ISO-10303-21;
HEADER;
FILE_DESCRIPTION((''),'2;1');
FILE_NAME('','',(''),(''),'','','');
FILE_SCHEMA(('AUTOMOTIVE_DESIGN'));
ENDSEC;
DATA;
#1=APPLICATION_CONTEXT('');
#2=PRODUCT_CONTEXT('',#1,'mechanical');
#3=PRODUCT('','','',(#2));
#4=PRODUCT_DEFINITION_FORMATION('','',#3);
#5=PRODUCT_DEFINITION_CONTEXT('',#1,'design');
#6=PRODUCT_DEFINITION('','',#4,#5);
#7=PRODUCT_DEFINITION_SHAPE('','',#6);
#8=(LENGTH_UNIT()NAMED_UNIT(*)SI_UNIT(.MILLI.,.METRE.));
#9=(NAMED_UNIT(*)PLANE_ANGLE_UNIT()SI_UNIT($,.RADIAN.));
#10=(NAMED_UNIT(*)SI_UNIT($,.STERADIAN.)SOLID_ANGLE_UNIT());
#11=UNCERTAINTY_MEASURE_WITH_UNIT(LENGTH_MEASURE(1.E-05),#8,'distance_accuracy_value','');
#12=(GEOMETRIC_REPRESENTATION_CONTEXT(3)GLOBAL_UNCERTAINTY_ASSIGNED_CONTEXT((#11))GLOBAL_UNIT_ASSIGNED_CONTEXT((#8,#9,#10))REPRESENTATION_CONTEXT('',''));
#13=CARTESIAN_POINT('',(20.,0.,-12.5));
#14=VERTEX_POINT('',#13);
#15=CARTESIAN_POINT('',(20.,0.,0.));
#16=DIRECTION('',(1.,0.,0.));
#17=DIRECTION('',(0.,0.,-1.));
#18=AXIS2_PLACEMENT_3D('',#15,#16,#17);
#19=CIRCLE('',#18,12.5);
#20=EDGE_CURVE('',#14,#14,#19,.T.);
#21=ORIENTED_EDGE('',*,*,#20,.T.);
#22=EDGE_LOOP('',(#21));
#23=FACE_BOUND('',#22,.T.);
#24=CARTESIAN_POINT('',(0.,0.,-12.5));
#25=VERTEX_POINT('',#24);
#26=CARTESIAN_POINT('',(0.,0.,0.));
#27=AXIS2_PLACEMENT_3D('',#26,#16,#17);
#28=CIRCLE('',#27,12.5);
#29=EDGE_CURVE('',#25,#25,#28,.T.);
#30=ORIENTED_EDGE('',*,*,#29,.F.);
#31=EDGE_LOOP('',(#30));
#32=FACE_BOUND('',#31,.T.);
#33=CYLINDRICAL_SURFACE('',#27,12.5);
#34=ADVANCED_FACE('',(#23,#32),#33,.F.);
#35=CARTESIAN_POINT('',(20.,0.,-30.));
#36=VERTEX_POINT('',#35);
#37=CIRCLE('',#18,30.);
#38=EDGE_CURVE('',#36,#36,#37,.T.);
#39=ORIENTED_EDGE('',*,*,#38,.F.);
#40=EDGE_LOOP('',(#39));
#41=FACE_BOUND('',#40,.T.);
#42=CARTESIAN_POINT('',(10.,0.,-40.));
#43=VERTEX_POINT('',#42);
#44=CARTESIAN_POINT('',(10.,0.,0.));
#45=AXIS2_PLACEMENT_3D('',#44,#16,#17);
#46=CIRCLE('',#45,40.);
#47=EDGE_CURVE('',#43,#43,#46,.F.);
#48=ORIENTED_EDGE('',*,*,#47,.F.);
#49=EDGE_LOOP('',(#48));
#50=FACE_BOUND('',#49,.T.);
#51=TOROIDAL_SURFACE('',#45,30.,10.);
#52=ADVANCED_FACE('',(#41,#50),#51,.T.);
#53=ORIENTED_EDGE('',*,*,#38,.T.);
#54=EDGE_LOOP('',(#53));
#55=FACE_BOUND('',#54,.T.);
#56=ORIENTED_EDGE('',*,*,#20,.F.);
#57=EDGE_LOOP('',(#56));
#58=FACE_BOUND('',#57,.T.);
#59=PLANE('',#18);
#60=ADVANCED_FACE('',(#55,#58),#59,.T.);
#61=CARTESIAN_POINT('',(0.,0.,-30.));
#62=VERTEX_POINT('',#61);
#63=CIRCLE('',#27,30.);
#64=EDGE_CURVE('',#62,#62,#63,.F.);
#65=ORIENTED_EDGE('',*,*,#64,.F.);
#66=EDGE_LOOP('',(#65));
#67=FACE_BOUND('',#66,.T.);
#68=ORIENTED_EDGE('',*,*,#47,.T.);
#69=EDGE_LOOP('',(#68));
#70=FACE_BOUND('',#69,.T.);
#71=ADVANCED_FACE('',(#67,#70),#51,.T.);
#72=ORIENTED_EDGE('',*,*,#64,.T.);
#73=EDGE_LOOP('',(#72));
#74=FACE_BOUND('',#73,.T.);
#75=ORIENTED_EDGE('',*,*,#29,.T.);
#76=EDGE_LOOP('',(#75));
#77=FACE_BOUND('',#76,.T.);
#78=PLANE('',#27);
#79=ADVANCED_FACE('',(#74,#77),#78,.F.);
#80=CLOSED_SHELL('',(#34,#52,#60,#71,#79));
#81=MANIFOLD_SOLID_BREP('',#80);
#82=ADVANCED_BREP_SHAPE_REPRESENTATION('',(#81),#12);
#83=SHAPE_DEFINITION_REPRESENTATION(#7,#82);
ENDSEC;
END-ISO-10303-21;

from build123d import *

# Parameters (mm, degrees)
SKETCH1_R           = 40
BOSS_EXTRUDE1_DEPTH = 20
FILLET2_R           = 10
SKETCH2_R           = 12.5
CUT_EXTRUDE1_DEPTH  = 20


with BuildPart() as part:
    # Sketch1 → Boss-Extrude1 (new body)
    with BuildSketch(Plane(origin=(0, 0, 0), x_dir=(0, 0, -1), z_dir=(1, 0, 0))):
        Circle(SKETCH1_R)
    extrude(amount=BOSS_EXTRUDE1_DEPTH)

    # Fillet2
    fillet2_edges = [part.edges().sort_by_distance(p)[0] for p in [
        (0, 0, 40),
        (20, 0, 40),
    ]]
    fillet(fillet2_edges, radius=FILLET2_R - 0.0001)  # a hair under: the kernel refuses the full size

    # Sketch2 → Cut-Extrude1 (cut)
    with BuildSketch(Plane(origin=(20, 0, 0), x_dir=(0, 0, -1), z_dir=(1, 0, 0))):
        Circle(SKETCH2_R)
    extrude(amount=-CUT_EXTRUDE1_DEPTH, mode=Mode.SUBTRACT)


solid = part.part
